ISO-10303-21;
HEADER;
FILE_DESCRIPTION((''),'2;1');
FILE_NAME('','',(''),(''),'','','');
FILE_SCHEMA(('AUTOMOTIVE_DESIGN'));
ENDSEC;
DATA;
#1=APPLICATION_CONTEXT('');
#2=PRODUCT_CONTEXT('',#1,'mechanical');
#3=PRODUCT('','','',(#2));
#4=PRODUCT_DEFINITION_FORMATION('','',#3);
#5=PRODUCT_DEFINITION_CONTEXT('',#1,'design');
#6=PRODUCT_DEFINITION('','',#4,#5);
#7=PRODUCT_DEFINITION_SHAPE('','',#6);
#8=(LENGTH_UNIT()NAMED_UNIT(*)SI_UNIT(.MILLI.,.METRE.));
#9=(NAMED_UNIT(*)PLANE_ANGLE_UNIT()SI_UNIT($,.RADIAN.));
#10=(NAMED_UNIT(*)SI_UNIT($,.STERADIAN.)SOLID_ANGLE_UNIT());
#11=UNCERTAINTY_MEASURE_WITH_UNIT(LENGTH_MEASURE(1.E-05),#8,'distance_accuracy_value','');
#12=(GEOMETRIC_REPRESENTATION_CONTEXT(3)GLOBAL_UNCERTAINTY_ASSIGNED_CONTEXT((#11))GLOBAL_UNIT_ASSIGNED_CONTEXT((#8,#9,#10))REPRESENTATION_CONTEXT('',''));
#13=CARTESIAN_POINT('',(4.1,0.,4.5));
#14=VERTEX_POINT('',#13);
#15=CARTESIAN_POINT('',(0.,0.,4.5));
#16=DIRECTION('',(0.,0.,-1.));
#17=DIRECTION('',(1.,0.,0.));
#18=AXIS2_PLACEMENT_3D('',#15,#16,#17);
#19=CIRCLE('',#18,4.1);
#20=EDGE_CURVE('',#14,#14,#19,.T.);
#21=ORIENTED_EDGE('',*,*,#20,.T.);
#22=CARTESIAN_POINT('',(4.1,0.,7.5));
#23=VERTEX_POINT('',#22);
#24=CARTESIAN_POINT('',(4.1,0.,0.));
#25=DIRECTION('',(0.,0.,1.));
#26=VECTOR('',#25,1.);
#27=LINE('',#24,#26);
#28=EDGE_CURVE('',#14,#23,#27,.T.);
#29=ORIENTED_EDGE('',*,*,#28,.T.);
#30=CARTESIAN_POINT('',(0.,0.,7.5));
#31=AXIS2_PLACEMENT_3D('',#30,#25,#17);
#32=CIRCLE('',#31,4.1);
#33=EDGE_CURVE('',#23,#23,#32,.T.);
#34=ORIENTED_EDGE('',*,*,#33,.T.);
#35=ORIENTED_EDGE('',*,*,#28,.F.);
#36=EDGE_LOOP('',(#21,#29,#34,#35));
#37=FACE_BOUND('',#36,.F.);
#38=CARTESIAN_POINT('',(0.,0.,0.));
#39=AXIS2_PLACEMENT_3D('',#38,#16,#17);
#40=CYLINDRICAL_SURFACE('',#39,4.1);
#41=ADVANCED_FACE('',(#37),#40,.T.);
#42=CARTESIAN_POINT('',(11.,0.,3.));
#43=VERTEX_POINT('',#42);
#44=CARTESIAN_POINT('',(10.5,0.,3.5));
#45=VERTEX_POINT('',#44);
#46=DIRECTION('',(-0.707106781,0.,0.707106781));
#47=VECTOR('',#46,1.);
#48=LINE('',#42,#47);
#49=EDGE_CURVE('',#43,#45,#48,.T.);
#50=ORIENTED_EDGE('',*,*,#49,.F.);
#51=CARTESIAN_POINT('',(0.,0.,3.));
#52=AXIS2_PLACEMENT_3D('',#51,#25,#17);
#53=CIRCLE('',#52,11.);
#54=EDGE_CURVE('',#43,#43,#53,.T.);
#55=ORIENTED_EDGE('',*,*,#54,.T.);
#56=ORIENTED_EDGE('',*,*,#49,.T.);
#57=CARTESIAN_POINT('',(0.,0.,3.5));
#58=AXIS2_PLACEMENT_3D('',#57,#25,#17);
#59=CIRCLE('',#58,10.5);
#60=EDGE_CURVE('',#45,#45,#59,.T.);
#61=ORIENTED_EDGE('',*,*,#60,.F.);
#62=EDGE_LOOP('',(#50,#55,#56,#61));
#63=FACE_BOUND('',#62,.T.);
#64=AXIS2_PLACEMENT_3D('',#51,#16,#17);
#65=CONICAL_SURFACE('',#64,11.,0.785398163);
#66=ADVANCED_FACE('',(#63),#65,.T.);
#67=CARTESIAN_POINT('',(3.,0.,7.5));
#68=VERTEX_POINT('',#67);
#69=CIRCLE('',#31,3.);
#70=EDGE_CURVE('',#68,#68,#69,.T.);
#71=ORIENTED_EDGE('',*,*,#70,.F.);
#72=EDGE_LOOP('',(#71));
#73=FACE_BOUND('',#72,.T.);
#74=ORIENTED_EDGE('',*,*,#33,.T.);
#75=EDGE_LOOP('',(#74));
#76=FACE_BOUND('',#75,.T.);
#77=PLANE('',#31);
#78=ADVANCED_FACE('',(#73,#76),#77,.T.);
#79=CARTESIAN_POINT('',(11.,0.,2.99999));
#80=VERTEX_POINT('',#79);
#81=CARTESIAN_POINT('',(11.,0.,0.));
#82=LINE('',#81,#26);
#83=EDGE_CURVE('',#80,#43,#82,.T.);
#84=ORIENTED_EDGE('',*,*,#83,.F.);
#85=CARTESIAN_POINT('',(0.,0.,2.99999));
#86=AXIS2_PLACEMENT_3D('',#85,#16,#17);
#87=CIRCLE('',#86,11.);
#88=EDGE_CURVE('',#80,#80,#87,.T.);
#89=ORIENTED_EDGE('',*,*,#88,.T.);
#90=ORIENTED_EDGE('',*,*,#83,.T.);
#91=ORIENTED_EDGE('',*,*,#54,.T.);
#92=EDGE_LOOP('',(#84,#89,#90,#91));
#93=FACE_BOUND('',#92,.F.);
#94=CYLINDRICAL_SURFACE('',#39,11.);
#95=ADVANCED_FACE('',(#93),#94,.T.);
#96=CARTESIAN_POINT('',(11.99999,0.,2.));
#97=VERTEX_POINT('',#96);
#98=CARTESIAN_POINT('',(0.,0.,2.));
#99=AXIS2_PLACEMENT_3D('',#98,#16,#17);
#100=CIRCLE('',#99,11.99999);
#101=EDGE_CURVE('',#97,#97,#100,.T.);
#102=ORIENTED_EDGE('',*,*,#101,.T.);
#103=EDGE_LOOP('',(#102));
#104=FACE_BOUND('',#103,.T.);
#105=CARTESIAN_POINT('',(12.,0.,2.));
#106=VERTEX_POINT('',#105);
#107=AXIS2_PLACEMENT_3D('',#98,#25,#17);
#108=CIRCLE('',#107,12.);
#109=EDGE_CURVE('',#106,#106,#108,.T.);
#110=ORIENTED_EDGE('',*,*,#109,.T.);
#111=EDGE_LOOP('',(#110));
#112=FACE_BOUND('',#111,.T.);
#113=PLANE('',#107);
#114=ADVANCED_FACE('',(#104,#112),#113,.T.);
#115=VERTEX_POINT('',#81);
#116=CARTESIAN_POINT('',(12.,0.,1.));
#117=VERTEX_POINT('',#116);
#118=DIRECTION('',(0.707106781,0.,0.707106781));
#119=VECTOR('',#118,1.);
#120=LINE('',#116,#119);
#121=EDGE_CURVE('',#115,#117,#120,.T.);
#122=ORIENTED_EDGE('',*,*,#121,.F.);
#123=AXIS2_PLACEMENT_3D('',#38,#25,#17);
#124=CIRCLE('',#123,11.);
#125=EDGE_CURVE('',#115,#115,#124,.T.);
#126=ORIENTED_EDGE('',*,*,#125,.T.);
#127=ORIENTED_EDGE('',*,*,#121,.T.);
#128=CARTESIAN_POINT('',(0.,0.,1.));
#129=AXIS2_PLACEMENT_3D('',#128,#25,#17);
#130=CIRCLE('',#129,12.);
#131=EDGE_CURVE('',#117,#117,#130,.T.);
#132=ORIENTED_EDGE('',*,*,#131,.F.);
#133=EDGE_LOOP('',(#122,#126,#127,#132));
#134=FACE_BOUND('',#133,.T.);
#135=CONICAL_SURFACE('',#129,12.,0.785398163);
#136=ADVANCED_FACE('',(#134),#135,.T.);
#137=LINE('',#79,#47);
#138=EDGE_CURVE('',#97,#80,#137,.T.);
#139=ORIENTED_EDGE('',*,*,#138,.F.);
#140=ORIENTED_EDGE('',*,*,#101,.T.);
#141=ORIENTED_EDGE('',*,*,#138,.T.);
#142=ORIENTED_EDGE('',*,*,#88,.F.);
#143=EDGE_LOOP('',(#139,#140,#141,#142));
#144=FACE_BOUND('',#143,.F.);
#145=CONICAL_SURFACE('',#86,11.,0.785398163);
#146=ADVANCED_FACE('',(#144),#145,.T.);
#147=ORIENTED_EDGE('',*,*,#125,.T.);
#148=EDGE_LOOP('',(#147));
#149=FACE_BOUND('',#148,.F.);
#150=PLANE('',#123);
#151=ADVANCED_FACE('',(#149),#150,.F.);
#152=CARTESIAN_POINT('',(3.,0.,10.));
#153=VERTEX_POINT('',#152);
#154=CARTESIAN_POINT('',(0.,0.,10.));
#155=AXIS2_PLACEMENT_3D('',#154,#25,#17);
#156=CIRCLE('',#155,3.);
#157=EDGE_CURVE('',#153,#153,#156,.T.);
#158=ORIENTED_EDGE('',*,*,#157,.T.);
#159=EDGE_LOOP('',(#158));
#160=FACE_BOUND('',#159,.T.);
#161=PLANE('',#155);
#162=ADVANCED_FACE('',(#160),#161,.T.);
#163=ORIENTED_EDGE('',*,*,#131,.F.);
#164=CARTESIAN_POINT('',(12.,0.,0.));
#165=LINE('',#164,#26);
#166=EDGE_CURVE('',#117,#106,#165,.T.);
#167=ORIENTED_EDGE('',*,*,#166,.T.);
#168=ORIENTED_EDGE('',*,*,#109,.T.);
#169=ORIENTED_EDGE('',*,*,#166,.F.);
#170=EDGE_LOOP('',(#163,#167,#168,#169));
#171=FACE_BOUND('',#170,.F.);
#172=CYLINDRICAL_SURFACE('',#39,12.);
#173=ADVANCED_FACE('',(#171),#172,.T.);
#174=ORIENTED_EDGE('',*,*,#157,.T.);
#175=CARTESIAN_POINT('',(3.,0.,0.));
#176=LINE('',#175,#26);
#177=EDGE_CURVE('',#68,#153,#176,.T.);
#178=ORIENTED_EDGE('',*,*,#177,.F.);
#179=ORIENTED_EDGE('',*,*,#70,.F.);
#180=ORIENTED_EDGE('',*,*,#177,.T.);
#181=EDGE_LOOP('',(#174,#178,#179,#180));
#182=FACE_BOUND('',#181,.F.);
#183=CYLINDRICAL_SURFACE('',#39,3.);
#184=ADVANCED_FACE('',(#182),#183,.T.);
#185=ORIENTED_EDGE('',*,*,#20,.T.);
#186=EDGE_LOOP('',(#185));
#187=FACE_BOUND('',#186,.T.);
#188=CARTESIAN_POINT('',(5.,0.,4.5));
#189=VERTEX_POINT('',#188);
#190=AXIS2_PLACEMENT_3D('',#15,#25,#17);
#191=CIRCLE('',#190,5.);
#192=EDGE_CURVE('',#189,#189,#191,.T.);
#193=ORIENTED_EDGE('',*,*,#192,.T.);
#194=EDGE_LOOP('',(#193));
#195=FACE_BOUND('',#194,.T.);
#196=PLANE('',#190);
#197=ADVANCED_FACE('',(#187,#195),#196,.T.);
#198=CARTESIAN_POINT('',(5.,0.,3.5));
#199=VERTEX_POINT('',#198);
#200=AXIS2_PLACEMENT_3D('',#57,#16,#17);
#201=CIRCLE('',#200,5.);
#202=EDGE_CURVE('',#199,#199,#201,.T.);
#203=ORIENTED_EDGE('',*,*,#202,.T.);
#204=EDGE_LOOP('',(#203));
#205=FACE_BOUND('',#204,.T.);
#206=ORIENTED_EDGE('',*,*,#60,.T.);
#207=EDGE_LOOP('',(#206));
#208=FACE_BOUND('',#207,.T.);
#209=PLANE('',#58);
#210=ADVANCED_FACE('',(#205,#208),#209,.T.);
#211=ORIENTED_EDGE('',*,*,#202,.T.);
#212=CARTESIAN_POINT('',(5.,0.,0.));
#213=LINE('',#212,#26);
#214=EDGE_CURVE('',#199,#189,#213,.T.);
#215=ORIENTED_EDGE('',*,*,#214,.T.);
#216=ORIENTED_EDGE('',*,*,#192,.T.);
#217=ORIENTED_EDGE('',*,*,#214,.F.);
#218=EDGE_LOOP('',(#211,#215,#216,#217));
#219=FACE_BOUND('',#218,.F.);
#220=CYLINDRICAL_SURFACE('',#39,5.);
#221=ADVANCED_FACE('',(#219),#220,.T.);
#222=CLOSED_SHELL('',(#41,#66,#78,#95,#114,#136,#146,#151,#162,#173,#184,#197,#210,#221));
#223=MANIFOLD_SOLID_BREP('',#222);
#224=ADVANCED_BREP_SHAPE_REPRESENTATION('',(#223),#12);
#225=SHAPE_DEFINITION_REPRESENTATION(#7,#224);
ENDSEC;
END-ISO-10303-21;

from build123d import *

# Parameters (mm, degrees)
F0_R     = 12
F0_R_2   = 11
F0_R_3   = 5
F0_R_4   = 4.1
F0_R_5   = 3
F1_DEPTH = 2
F2_DEPTH = 3.5
F3_SIZE  = 0.99999
F4_DEPTH = 4.5
F5_DEPTH = 7.5
F6_DEPTH = 10
F7_SIZE  = 1
F8_SIZE  = 0.5


# Not quite as in the source:
# - a fillet or chamfer is up to 0.001 mm smaller than in the source, because OpenCascade refuses the exact size


with BuildPart() as f1:
    # F0 (on Top) → F1 (new body)
    with BuildSketch(Plane.XY):
        Circle(F0_R)
        Circle(F0_R_2, mode=Mode.SUBTRACT)
        Circle(F0_R_2)
        Circle(F0_R_3, mode=Mode.SUBTRACT)
        Circle(F0_R_3)
        Circle(F0_R_4, mode=Mode.SUBTRACT)
        Circle(F0_R_4)
        Circle(F0_R_5, mode=Mode.SUBTRACT)
        Circle(F0_R_5)
    extrude(amount=F1_DEPTH)

    # F0 (on Top) → F2 (join)
    with BuildSketch(Plane.XY):
        Circle(F0_R_2)
        Circle(F0_R_3, mode=Mode.SUBTRACT)
        Circle(F0_R_3)
        Circle(F0_R_4, mode=Mode.SUBTRACT)
        Circle(F0_R_4)
        Circle(F0_R_5, mode=Mode.SUBTRACT)
        Circle(F0_R_5)
    extrude(amount=F2_DEPTH)

    # F3 (size 1 in the source; OpenCascade refuses exactly that, so slightly less here)
    f3_edges = [f1.edges().sort_by_distance(p)[0] for p in [
        (-11, 0, 2),
    ]]
    chamfer(f3_edges, length=F3_SIZE)

    # F0 (on Top) → F4 (join)
    with BuildSketch(Plane.XY):
        Circle(F0_R_3)
        Circle(F0_R_4, mode=Mode.SUBTRACT)
        Circle(F0_R_4)
        Circle(F0_R_5, mode=Mode.SUBTRACT)
        Circle(F0_R_5)
    extrude(amount=F4_DEPTH)

    # F0 (on Top) → F5 (join)
    with BuildSketch(Plane.XY):
        Circle(F0_R_4)
        Circle(F0_R_5, mode=Mode.SUBTRACT)
    extrude(amount=F5_DEPTH)

    # F0 (on Top) → F6 (join)
    with BuildSketch(Plane.XY):
        Circle(F0_R_5)
    extrude(amount=F6_DEPTH)

    # F7
    f7_edges = [f1.edges().sort_by_distance(p)[0] for p in [
        (-12, 0, 0),
    ]]
    chamfer(f7_edges, length=F7_SIZE)

    # F8
    f8_edges = [f1.edges().sort_by_distance(p)[0] for p in [
        (-11, 0, 3.5),
    ]]
    chamfer(f8_edges, length=F8_SIZE)


solid = f1.part
